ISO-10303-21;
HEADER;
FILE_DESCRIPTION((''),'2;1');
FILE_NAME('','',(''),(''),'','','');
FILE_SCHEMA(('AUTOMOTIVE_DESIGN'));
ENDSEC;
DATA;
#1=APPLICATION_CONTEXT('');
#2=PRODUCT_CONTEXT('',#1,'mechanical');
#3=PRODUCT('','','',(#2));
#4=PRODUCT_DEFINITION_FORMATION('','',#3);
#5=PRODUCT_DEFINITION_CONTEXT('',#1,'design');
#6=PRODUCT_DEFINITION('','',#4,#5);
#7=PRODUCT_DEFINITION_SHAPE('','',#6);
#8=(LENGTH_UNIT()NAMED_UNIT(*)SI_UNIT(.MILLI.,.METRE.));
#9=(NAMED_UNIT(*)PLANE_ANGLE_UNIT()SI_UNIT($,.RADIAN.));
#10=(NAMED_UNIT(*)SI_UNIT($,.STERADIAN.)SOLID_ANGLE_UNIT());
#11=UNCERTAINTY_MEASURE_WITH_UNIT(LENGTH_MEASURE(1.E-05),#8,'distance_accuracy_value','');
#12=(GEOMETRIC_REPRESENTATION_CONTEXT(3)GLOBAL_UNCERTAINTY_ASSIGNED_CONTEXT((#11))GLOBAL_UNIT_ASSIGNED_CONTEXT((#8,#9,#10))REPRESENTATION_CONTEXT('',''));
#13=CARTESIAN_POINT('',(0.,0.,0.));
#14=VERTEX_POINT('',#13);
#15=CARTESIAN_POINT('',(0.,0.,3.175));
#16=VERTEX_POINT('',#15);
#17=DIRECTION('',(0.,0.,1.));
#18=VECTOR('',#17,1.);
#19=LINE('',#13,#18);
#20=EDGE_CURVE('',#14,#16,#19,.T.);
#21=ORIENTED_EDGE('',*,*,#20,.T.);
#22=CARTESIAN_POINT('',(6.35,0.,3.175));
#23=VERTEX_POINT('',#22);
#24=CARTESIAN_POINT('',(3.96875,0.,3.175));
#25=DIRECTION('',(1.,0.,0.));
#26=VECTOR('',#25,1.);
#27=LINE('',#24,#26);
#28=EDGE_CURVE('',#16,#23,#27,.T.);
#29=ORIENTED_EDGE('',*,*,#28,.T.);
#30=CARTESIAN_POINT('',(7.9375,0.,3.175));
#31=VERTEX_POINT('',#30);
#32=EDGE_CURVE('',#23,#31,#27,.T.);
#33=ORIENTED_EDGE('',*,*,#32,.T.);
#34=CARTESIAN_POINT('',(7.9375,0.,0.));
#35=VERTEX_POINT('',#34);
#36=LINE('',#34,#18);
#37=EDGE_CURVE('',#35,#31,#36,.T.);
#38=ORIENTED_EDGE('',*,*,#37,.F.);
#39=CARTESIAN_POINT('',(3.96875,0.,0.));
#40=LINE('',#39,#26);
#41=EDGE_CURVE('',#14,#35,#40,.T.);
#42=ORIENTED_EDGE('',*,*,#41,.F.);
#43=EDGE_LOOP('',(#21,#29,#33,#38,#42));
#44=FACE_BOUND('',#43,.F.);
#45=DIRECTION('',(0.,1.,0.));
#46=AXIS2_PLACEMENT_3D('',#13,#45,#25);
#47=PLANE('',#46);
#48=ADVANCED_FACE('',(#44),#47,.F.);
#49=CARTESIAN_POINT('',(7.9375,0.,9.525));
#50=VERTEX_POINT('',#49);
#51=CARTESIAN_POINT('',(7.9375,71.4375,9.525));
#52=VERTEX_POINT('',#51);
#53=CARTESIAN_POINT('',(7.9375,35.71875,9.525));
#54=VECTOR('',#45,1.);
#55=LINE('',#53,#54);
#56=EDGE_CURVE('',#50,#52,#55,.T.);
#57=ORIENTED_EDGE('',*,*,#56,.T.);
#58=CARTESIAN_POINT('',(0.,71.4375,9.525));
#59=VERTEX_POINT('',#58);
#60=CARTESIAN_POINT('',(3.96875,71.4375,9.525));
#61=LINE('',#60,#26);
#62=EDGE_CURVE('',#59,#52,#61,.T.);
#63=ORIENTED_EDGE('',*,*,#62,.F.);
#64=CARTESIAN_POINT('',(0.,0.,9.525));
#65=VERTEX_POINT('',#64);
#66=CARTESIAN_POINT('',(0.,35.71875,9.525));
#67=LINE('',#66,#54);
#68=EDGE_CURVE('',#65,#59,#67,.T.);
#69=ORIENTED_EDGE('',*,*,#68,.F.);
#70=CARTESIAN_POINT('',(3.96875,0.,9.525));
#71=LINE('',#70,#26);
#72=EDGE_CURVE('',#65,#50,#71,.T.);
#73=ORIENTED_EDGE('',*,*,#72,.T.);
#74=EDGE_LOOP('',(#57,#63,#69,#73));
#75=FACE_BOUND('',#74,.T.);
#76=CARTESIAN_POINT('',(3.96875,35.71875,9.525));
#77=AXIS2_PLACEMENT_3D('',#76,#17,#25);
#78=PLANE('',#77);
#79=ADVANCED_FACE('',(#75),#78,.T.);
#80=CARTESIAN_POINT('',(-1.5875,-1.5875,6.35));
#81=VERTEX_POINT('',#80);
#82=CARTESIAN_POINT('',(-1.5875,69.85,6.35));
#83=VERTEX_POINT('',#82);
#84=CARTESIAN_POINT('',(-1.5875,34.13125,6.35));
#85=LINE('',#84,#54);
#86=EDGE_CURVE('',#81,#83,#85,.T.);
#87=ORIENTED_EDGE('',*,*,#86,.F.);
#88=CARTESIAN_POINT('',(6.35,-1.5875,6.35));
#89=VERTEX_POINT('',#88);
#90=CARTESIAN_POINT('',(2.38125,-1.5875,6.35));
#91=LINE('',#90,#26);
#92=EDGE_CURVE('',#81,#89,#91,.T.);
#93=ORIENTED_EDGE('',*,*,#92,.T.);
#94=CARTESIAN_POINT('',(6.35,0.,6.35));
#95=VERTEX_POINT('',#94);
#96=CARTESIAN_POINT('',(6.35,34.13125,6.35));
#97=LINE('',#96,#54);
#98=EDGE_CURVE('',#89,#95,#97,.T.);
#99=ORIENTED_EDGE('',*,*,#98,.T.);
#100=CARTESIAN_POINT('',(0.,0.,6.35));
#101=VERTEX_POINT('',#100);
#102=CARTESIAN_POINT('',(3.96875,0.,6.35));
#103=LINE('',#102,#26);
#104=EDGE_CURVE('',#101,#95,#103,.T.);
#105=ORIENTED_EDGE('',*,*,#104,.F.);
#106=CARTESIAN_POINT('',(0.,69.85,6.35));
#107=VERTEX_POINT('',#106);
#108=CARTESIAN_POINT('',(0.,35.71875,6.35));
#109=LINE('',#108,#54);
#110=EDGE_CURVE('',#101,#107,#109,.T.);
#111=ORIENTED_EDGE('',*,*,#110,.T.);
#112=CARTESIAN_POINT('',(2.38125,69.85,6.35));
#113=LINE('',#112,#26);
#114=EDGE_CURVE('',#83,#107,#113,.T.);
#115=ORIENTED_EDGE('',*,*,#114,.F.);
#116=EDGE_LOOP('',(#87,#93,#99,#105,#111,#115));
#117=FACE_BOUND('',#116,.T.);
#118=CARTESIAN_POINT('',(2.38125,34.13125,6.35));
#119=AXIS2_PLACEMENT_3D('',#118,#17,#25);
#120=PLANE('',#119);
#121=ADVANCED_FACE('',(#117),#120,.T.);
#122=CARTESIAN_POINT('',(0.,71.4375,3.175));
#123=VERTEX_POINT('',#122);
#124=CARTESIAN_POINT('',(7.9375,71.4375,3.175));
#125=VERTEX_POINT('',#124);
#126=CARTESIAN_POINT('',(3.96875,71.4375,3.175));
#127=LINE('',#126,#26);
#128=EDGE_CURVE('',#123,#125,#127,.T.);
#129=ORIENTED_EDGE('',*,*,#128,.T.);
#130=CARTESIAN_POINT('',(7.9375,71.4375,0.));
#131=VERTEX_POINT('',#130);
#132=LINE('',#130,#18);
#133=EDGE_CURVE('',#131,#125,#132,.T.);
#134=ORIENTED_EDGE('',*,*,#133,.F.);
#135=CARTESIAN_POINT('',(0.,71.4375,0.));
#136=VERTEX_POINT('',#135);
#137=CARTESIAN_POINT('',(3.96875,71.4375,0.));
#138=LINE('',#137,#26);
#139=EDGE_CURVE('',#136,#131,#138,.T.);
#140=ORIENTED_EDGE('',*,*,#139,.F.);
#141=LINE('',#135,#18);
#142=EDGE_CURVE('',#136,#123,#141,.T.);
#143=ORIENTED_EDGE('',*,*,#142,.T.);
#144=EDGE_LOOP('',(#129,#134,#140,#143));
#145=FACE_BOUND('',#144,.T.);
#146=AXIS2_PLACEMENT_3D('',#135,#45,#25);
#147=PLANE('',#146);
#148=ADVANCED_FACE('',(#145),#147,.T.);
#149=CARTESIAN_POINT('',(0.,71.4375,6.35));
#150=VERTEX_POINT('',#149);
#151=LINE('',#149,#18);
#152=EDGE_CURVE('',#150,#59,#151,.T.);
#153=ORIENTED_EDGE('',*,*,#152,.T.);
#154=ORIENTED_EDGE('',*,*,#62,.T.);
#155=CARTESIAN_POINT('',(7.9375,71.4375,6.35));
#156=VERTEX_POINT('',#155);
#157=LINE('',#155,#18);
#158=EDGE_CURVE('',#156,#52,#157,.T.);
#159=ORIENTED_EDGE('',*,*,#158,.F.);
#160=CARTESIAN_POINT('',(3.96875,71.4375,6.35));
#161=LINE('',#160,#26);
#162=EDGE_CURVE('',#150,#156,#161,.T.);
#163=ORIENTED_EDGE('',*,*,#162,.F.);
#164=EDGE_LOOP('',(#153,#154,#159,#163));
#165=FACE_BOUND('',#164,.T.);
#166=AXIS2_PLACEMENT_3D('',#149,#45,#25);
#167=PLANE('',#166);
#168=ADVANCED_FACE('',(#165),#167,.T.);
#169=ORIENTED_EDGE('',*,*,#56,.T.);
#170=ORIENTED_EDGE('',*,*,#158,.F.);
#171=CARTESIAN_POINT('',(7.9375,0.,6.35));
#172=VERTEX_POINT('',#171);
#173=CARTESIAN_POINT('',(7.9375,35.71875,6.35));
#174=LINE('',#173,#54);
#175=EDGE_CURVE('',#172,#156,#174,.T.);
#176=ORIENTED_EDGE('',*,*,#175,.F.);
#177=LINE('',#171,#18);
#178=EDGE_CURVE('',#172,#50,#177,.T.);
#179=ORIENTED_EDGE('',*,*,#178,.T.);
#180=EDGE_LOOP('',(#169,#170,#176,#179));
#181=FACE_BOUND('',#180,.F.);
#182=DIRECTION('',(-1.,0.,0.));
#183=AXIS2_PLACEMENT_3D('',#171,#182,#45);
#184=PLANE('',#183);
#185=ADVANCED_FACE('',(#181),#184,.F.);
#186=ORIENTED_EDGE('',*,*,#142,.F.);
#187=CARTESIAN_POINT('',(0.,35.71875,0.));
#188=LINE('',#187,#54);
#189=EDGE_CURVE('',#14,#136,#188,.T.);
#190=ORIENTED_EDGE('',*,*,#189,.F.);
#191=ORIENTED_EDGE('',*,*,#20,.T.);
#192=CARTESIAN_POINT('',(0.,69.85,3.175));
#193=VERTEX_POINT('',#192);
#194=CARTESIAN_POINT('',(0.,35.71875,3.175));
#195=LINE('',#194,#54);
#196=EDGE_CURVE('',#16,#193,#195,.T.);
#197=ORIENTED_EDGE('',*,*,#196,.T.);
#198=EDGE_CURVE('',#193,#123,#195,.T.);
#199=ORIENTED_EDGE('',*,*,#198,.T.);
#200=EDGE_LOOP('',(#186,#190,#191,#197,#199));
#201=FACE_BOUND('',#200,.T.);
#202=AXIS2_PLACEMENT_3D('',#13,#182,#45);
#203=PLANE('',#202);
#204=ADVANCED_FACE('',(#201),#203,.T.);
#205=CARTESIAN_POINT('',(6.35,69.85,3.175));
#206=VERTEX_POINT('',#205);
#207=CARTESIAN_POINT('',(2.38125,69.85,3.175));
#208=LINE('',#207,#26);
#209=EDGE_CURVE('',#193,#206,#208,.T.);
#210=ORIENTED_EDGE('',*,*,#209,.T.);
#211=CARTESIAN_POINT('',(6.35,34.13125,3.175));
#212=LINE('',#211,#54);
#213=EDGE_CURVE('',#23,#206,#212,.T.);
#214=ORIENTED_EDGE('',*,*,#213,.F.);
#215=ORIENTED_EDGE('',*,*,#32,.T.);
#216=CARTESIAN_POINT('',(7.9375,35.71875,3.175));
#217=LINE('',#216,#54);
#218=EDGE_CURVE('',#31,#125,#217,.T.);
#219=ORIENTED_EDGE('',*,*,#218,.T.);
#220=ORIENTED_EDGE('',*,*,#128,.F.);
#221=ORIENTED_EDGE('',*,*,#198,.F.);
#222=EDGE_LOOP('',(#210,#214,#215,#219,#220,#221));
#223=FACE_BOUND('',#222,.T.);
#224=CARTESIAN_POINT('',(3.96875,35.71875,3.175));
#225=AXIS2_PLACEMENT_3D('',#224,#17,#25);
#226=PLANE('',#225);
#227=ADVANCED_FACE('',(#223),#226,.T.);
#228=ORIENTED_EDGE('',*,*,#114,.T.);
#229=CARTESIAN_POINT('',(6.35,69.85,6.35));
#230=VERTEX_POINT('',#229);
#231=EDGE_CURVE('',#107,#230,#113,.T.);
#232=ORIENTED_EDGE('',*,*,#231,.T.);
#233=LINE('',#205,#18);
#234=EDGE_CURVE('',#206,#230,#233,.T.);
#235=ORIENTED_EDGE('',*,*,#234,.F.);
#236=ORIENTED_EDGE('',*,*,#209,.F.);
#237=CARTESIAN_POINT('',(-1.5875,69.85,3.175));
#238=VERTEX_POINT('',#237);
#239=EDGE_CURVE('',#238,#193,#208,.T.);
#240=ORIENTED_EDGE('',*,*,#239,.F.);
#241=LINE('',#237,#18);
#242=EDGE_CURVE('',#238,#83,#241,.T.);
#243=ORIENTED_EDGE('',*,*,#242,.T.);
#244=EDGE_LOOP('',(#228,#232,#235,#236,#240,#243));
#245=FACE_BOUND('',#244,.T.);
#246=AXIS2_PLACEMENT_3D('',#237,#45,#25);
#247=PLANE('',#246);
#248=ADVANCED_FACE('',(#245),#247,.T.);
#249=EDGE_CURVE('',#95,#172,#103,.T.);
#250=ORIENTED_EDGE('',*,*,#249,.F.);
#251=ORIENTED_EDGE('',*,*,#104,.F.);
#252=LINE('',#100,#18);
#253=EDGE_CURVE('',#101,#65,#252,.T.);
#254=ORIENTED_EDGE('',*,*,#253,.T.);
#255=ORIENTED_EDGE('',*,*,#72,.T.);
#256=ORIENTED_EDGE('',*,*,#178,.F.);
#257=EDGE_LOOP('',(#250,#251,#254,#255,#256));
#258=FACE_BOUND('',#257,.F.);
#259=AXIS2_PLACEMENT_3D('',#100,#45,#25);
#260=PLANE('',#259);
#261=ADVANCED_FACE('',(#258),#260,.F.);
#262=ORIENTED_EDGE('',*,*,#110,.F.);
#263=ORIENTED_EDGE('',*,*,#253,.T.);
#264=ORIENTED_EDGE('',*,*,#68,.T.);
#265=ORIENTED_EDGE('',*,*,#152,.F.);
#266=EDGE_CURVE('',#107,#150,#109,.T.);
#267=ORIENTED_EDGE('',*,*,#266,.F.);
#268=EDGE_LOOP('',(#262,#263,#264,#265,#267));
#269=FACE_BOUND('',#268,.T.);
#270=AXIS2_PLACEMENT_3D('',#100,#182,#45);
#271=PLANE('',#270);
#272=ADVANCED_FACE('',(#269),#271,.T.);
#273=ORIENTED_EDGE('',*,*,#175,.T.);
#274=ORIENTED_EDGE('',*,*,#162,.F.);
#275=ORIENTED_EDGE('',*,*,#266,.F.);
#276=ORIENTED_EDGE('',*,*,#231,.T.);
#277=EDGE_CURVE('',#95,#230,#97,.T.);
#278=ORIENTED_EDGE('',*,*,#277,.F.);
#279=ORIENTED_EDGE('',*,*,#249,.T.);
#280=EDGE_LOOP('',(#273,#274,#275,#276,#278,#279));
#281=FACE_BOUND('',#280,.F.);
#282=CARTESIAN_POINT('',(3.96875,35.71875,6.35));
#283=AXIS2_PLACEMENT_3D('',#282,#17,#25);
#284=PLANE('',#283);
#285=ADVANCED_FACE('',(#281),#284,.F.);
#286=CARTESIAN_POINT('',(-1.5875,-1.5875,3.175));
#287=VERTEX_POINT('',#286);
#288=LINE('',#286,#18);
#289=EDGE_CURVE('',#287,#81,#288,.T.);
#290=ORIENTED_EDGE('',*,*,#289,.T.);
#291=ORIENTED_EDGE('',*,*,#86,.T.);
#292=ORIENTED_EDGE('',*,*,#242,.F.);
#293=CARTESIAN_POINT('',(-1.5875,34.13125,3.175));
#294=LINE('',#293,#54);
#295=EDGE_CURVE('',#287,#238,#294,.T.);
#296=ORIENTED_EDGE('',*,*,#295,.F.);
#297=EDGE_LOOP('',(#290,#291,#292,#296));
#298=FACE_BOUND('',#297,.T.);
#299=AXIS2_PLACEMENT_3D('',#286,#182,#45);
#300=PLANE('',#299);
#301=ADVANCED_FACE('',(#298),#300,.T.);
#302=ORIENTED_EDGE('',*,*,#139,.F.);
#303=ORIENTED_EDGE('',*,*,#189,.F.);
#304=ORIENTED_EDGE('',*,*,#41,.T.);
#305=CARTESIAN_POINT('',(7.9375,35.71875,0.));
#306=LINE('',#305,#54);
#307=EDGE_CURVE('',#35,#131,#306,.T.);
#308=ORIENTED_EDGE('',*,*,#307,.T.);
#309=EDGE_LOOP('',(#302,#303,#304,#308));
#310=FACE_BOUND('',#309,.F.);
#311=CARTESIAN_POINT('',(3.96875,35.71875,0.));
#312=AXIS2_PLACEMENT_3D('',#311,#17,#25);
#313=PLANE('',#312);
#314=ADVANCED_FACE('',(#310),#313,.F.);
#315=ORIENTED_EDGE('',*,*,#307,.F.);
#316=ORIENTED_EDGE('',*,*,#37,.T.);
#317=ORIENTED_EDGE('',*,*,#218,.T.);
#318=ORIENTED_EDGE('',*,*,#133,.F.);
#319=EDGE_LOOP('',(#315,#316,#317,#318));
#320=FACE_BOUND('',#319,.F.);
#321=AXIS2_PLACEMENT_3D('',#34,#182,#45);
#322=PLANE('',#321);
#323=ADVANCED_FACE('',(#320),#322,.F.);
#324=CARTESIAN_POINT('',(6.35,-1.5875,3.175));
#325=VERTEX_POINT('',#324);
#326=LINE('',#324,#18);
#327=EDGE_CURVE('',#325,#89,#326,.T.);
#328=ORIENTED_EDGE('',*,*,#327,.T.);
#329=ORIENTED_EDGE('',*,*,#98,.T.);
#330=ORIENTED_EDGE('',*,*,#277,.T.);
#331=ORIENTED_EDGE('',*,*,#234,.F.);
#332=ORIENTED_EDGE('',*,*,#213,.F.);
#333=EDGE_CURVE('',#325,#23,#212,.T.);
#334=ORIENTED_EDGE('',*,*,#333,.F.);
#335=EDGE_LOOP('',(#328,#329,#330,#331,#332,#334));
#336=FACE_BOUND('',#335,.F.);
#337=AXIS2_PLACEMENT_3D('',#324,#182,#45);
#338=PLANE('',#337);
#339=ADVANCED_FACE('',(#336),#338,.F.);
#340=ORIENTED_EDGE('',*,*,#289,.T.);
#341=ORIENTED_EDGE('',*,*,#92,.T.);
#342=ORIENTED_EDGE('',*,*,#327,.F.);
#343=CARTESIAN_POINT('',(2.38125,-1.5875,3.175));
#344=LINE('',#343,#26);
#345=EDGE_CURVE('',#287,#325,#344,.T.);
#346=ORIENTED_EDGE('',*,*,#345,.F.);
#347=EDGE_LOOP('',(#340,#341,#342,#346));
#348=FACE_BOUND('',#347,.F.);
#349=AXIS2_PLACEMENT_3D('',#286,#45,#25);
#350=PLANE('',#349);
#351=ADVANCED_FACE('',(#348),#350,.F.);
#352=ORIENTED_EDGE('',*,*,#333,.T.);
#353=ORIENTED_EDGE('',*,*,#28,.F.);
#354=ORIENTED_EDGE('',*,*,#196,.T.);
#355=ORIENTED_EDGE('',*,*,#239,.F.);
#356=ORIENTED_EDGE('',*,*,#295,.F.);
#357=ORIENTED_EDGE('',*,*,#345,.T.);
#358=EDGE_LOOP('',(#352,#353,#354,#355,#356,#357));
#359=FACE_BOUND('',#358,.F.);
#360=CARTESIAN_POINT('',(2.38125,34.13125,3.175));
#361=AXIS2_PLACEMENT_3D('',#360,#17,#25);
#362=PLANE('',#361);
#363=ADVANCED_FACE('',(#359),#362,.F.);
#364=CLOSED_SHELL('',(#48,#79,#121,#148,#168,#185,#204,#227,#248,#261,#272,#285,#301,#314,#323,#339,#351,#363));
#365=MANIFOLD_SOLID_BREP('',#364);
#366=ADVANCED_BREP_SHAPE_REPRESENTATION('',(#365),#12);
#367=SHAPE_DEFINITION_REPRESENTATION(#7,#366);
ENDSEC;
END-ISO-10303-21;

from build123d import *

# Parameters (mm, degrees)
F2_W     = 7.9375
F2_H     = 71.4375
F3_DEPTH = 3.175
F4_W     = 7.9375
F4_H     = 71.4375
F5_DEPTH = 3.175
F6_W     = 7.9375
F6_H     = 71.4375
F7_DEPTH = 3.175


# Not quite as in the source:
# - a variable given as a bare number and used for a length is read in inches; the dataset says mm whatever the document's units were


with BuildPart() as f3:
    # F2 (on Top) → F3 (new body)
    with BuildSketch(Plane.XY):
        with Locations((3.96875, 35.71875)):
            Rectangle(F2_W, F2_H)
    extrude(amount=F3_DEPTH)

    # F4 (on face) → F5 (join)
    with BuildSketch(Plane.XY.offset(3.175)):
        with Locations((2.38125, 34.13125)):
            Rectangle(F4_W, F4_H)
    extrude(amount=F5_DEPTH)

    # F6 (on face) → F7 (join)
    with BuildSketch(Plane.XY.offset(6.35)):
        with Locations((3.96875, 35.71875)):
            Rectangle(F6_W, F6_H)
    extrude(amount=F7_DEPTH)


solid = f3.part
